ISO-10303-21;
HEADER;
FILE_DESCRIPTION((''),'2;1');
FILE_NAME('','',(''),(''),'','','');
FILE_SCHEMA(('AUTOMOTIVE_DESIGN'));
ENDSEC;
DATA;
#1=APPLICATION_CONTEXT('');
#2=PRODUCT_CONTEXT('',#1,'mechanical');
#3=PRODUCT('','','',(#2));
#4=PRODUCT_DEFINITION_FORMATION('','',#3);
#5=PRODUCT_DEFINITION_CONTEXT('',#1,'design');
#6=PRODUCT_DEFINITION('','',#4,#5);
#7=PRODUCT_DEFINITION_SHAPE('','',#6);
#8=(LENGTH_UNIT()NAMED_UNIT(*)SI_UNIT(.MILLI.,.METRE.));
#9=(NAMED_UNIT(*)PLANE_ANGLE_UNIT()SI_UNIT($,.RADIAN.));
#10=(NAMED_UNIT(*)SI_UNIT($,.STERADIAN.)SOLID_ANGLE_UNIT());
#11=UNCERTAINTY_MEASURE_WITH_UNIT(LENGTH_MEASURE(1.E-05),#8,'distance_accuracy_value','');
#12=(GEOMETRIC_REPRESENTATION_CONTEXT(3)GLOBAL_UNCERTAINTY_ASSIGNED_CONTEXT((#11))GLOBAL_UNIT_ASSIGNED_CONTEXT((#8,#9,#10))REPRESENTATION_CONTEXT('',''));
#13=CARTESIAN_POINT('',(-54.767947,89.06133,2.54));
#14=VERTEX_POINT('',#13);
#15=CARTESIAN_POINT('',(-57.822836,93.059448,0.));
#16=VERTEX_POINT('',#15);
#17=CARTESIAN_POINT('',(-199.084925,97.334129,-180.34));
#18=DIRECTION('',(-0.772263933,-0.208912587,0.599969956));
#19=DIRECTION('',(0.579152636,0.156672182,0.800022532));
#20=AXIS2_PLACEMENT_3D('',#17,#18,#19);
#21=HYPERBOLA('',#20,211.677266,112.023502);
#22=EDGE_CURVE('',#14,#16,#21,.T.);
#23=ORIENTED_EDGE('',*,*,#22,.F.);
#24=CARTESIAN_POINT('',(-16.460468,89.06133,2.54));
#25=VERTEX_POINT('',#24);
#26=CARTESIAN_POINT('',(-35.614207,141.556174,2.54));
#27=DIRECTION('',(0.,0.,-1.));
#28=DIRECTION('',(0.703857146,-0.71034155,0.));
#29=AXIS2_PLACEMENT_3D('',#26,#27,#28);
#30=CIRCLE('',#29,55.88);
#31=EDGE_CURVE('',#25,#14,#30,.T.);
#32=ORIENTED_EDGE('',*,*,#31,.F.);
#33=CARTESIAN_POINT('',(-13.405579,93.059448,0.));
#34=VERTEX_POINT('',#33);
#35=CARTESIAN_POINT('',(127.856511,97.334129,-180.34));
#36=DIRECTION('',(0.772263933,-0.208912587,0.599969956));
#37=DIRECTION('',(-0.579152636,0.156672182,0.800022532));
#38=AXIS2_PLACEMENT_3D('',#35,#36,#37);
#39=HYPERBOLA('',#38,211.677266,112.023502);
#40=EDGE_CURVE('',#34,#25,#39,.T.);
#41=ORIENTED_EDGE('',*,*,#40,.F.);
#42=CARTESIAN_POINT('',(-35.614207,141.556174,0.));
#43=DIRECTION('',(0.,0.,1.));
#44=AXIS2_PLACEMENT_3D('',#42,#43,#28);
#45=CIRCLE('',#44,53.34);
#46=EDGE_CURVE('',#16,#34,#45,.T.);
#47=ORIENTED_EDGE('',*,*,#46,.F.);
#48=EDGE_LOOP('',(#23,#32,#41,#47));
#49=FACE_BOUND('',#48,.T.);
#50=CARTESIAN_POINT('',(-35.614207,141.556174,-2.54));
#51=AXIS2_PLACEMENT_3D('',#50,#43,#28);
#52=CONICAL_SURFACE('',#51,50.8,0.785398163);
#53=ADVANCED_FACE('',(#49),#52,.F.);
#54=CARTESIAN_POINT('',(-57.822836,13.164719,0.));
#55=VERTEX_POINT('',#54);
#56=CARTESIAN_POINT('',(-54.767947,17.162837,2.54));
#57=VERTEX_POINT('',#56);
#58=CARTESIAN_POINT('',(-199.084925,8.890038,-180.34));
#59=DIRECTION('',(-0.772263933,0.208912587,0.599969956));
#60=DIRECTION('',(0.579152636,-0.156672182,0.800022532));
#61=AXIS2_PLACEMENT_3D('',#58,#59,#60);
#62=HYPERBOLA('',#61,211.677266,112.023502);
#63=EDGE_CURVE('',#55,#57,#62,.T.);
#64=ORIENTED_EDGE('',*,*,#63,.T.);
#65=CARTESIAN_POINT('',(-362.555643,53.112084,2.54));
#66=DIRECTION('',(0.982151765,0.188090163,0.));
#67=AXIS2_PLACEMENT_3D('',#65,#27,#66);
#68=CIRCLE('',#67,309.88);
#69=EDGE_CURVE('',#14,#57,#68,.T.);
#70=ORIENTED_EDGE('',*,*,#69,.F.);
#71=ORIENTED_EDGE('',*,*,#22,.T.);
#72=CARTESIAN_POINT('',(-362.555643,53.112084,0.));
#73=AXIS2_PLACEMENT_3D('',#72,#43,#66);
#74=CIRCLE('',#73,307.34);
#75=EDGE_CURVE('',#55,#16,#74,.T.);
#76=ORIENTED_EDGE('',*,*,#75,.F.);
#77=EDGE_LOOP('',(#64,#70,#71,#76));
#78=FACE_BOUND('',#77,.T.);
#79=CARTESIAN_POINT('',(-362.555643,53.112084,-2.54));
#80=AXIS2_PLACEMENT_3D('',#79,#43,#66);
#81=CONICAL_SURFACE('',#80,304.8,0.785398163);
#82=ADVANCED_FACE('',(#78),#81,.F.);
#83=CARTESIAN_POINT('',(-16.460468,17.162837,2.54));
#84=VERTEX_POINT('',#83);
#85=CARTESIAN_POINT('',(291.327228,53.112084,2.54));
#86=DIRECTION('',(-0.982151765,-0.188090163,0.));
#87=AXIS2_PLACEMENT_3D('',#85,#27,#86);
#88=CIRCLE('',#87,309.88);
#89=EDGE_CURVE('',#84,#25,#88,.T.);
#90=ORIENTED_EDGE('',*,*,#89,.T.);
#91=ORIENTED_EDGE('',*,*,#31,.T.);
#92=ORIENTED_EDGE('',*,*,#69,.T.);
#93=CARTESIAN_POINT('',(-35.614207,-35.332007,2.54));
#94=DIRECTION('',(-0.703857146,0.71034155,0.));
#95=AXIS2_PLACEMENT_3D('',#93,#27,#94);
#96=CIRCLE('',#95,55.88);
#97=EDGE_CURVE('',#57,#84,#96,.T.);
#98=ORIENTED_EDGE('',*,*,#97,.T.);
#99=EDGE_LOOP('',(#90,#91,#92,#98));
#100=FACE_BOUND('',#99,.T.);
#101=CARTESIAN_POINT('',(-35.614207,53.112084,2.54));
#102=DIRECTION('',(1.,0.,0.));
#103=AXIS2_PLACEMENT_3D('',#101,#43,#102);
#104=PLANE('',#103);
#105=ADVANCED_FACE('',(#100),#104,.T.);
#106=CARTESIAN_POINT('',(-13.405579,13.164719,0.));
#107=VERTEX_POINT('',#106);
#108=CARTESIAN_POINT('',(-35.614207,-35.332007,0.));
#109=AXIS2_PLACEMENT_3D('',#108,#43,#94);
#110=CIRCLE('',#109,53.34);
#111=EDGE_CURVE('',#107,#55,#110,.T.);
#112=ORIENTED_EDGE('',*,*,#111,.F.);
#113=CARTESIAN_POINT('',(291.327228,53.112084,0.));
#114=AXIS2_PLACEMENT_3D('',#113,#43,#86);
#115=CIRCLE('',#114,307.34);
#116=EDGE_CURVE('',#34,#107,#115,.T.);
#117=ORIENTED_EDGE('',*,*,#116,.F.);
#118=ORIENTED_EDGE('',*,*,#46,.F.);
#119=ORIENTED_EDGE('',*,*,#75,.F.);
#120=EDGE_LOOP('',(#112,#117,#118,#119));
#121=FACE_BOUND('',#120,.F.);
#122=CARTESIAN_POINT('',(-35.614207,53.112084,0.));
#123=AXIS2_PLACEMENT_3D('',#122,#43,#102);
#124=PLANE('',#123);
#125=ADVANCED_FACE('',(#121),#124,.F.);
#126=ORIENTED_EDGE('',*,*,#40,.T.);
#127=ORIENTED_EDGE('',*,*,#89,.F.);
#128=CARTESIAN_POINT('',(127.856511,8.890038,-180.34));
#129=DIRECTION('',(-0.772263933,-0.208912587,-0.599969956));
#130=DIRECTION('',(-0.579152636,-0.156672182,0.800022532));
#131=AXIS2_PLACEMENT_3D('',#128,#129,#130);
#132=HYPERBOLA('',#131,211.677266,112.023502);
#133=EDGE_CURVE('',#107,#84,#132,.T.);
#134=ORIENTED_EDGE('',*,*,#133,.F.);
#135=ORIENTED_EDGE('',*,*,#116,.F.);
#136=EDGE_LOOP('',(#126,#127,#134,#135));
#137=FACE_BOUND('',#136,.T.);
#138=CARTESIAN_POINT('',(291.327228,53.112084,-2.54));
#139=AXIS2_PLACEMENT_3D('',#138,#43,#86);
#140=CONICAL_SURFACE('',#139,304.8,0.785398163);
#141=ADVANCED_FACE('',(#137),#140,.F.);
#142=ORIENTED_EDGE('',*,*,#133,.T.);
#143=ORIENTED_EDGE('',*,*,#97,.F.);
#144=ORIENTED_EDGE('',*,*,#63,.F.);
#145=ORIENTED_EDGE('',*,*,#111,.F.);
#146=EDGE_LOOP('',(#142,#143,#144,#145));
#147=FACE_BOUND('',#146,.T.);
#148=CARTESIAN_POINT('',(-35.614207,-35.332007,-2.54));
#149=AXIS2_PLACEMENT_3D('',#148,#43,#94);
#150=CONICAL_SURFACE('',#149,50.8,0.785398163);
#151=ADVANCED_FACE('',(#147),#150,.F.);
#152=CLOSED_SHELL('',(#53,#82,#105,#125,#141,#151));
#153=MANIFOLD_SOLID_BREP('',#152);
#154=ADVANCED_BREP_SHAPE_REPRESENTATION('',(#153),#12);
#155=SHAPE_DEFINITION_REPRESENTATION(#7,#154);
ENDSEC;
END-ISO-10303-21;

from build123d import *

# Parameters (mm, degrees)
F1_DEPTH    = 2.54
F2_T2_ANGLE = 21.6826985027
F2_T4_ANGLE = 89.4745768315
F2_T6_ANGLE = 21.6826985027
F2_T8_ANGLE = 89.4745768315


# Not quite as in the source:
# - a fillet or chamfer that OpenCascade refuses, or shapes differently, is made with other operations: its cross-section is extruded or revolved along the edge and cut away or added


with BuildPart() as f1:
    # F0 (on Top) → F1 (new body)
    with BuildSketch(Plane.XY):
        with BuildLine():
            ThreePointArc((-61.014207387, 8.6620835405), (-35.614207387, 15.4679930283), (-10.214207387, 8.6620835405))
            ThreePointArc((-10.214207387, 8.6620835405), (-13.4727715941, 53.1120835405), (-10.214207387, 97.5620835405))
            ThreePointArc((-10.214207387, 97.5620835405), (-35.614207387, 90.7561740528), (-61.014207387, 97.5620835405))
            ThreePointArc((-61.014207387, 97.5620835405), (-57.7556431798, 53.1120835405), (-61.014207387, 8.6620835405))
        make_face()
    extrude(amount=F1_DEPTH)

    # F2: chamfer of 5.08 on 4 edges, made by hand

    # F2_s1 → F2_t2 (revolve, cut)
    with BuildSketch(Plane(origin=(-22.6380198494, 118.2091118696, 0), x_dir=(0, 0, 1), z_dir=(-0.1880901634, 0.9821517655, 0))):
        Polygon((-2.54, -41.2948045664), (2.54, -36.2148045664), (2.54, -41.2948045664), align=None)
    revolve(axis=Axis((-362.5556431798, 53.1120835405, 2.54), (0, 0, -1)), revolution_arc=F2_T2_ANGLE, mode=Mode.SUBTRACT)

    # F2_s3 → F2_t4 (revolve, cut)
    with BuildSketch(Plane(origin=(-35.6356597066, -35.3103570189, 0), x_dir=(0, 0, 1), z_dir=(-0.7103415501, -0.7038571461, 0))):
        Polygon((-2.54, 50.7695217705), (2.54, 55.8495217705), (2.54, 50.7695217705), align=None)
    revolve(axis=Axis((-35.614207387, -35.3320069717, 2.54), (0, 0, -1)), revolution_arc=F2_T4_ANGLE, mode=Mode.SUBTRACT)

    # F2_s5 → F2_t6 (revolve, cut)
    with BuildSketch(Plane(origin=(0.4949892397, -2.5846888907, 0), x_dir=(0, 0, 1), z_dir=(0.1880901634, -0.9821517655, 0))):
        Polygon((-2.54, 8.6825878175), (2.54, 13.7625878175), (2.54, 8.6825878175), align=None)
    revolve(axis=Axis((291.3272284059, 53.1120835405, 2.54), (0, 0, -1)), revolution_arc=F2_T6_ANGLE, mode=Mode.SUBTRACT)

    # F2_s7 → F2_t8 (revolve, cut)
    with BuildSketch(Plane(origin=(52.8047119531, 52.3226803348, 0), x_dir=(0, 0, 1), z_dir=(0.7103415501, 0.7038571461, 0))):
        Polygon((-2.54, -74.8205464818), (2.54, -69.7405464818), (2.54, -74.8205464818), align=None)
    revolve(axis=Axis((-35.614207387, 141.5561740528, 2.54), (0, 0, -1)), revolution_arc=F2_T8_ANGLE, mode=Mode.SUBTRACT)


solid = f1.part
